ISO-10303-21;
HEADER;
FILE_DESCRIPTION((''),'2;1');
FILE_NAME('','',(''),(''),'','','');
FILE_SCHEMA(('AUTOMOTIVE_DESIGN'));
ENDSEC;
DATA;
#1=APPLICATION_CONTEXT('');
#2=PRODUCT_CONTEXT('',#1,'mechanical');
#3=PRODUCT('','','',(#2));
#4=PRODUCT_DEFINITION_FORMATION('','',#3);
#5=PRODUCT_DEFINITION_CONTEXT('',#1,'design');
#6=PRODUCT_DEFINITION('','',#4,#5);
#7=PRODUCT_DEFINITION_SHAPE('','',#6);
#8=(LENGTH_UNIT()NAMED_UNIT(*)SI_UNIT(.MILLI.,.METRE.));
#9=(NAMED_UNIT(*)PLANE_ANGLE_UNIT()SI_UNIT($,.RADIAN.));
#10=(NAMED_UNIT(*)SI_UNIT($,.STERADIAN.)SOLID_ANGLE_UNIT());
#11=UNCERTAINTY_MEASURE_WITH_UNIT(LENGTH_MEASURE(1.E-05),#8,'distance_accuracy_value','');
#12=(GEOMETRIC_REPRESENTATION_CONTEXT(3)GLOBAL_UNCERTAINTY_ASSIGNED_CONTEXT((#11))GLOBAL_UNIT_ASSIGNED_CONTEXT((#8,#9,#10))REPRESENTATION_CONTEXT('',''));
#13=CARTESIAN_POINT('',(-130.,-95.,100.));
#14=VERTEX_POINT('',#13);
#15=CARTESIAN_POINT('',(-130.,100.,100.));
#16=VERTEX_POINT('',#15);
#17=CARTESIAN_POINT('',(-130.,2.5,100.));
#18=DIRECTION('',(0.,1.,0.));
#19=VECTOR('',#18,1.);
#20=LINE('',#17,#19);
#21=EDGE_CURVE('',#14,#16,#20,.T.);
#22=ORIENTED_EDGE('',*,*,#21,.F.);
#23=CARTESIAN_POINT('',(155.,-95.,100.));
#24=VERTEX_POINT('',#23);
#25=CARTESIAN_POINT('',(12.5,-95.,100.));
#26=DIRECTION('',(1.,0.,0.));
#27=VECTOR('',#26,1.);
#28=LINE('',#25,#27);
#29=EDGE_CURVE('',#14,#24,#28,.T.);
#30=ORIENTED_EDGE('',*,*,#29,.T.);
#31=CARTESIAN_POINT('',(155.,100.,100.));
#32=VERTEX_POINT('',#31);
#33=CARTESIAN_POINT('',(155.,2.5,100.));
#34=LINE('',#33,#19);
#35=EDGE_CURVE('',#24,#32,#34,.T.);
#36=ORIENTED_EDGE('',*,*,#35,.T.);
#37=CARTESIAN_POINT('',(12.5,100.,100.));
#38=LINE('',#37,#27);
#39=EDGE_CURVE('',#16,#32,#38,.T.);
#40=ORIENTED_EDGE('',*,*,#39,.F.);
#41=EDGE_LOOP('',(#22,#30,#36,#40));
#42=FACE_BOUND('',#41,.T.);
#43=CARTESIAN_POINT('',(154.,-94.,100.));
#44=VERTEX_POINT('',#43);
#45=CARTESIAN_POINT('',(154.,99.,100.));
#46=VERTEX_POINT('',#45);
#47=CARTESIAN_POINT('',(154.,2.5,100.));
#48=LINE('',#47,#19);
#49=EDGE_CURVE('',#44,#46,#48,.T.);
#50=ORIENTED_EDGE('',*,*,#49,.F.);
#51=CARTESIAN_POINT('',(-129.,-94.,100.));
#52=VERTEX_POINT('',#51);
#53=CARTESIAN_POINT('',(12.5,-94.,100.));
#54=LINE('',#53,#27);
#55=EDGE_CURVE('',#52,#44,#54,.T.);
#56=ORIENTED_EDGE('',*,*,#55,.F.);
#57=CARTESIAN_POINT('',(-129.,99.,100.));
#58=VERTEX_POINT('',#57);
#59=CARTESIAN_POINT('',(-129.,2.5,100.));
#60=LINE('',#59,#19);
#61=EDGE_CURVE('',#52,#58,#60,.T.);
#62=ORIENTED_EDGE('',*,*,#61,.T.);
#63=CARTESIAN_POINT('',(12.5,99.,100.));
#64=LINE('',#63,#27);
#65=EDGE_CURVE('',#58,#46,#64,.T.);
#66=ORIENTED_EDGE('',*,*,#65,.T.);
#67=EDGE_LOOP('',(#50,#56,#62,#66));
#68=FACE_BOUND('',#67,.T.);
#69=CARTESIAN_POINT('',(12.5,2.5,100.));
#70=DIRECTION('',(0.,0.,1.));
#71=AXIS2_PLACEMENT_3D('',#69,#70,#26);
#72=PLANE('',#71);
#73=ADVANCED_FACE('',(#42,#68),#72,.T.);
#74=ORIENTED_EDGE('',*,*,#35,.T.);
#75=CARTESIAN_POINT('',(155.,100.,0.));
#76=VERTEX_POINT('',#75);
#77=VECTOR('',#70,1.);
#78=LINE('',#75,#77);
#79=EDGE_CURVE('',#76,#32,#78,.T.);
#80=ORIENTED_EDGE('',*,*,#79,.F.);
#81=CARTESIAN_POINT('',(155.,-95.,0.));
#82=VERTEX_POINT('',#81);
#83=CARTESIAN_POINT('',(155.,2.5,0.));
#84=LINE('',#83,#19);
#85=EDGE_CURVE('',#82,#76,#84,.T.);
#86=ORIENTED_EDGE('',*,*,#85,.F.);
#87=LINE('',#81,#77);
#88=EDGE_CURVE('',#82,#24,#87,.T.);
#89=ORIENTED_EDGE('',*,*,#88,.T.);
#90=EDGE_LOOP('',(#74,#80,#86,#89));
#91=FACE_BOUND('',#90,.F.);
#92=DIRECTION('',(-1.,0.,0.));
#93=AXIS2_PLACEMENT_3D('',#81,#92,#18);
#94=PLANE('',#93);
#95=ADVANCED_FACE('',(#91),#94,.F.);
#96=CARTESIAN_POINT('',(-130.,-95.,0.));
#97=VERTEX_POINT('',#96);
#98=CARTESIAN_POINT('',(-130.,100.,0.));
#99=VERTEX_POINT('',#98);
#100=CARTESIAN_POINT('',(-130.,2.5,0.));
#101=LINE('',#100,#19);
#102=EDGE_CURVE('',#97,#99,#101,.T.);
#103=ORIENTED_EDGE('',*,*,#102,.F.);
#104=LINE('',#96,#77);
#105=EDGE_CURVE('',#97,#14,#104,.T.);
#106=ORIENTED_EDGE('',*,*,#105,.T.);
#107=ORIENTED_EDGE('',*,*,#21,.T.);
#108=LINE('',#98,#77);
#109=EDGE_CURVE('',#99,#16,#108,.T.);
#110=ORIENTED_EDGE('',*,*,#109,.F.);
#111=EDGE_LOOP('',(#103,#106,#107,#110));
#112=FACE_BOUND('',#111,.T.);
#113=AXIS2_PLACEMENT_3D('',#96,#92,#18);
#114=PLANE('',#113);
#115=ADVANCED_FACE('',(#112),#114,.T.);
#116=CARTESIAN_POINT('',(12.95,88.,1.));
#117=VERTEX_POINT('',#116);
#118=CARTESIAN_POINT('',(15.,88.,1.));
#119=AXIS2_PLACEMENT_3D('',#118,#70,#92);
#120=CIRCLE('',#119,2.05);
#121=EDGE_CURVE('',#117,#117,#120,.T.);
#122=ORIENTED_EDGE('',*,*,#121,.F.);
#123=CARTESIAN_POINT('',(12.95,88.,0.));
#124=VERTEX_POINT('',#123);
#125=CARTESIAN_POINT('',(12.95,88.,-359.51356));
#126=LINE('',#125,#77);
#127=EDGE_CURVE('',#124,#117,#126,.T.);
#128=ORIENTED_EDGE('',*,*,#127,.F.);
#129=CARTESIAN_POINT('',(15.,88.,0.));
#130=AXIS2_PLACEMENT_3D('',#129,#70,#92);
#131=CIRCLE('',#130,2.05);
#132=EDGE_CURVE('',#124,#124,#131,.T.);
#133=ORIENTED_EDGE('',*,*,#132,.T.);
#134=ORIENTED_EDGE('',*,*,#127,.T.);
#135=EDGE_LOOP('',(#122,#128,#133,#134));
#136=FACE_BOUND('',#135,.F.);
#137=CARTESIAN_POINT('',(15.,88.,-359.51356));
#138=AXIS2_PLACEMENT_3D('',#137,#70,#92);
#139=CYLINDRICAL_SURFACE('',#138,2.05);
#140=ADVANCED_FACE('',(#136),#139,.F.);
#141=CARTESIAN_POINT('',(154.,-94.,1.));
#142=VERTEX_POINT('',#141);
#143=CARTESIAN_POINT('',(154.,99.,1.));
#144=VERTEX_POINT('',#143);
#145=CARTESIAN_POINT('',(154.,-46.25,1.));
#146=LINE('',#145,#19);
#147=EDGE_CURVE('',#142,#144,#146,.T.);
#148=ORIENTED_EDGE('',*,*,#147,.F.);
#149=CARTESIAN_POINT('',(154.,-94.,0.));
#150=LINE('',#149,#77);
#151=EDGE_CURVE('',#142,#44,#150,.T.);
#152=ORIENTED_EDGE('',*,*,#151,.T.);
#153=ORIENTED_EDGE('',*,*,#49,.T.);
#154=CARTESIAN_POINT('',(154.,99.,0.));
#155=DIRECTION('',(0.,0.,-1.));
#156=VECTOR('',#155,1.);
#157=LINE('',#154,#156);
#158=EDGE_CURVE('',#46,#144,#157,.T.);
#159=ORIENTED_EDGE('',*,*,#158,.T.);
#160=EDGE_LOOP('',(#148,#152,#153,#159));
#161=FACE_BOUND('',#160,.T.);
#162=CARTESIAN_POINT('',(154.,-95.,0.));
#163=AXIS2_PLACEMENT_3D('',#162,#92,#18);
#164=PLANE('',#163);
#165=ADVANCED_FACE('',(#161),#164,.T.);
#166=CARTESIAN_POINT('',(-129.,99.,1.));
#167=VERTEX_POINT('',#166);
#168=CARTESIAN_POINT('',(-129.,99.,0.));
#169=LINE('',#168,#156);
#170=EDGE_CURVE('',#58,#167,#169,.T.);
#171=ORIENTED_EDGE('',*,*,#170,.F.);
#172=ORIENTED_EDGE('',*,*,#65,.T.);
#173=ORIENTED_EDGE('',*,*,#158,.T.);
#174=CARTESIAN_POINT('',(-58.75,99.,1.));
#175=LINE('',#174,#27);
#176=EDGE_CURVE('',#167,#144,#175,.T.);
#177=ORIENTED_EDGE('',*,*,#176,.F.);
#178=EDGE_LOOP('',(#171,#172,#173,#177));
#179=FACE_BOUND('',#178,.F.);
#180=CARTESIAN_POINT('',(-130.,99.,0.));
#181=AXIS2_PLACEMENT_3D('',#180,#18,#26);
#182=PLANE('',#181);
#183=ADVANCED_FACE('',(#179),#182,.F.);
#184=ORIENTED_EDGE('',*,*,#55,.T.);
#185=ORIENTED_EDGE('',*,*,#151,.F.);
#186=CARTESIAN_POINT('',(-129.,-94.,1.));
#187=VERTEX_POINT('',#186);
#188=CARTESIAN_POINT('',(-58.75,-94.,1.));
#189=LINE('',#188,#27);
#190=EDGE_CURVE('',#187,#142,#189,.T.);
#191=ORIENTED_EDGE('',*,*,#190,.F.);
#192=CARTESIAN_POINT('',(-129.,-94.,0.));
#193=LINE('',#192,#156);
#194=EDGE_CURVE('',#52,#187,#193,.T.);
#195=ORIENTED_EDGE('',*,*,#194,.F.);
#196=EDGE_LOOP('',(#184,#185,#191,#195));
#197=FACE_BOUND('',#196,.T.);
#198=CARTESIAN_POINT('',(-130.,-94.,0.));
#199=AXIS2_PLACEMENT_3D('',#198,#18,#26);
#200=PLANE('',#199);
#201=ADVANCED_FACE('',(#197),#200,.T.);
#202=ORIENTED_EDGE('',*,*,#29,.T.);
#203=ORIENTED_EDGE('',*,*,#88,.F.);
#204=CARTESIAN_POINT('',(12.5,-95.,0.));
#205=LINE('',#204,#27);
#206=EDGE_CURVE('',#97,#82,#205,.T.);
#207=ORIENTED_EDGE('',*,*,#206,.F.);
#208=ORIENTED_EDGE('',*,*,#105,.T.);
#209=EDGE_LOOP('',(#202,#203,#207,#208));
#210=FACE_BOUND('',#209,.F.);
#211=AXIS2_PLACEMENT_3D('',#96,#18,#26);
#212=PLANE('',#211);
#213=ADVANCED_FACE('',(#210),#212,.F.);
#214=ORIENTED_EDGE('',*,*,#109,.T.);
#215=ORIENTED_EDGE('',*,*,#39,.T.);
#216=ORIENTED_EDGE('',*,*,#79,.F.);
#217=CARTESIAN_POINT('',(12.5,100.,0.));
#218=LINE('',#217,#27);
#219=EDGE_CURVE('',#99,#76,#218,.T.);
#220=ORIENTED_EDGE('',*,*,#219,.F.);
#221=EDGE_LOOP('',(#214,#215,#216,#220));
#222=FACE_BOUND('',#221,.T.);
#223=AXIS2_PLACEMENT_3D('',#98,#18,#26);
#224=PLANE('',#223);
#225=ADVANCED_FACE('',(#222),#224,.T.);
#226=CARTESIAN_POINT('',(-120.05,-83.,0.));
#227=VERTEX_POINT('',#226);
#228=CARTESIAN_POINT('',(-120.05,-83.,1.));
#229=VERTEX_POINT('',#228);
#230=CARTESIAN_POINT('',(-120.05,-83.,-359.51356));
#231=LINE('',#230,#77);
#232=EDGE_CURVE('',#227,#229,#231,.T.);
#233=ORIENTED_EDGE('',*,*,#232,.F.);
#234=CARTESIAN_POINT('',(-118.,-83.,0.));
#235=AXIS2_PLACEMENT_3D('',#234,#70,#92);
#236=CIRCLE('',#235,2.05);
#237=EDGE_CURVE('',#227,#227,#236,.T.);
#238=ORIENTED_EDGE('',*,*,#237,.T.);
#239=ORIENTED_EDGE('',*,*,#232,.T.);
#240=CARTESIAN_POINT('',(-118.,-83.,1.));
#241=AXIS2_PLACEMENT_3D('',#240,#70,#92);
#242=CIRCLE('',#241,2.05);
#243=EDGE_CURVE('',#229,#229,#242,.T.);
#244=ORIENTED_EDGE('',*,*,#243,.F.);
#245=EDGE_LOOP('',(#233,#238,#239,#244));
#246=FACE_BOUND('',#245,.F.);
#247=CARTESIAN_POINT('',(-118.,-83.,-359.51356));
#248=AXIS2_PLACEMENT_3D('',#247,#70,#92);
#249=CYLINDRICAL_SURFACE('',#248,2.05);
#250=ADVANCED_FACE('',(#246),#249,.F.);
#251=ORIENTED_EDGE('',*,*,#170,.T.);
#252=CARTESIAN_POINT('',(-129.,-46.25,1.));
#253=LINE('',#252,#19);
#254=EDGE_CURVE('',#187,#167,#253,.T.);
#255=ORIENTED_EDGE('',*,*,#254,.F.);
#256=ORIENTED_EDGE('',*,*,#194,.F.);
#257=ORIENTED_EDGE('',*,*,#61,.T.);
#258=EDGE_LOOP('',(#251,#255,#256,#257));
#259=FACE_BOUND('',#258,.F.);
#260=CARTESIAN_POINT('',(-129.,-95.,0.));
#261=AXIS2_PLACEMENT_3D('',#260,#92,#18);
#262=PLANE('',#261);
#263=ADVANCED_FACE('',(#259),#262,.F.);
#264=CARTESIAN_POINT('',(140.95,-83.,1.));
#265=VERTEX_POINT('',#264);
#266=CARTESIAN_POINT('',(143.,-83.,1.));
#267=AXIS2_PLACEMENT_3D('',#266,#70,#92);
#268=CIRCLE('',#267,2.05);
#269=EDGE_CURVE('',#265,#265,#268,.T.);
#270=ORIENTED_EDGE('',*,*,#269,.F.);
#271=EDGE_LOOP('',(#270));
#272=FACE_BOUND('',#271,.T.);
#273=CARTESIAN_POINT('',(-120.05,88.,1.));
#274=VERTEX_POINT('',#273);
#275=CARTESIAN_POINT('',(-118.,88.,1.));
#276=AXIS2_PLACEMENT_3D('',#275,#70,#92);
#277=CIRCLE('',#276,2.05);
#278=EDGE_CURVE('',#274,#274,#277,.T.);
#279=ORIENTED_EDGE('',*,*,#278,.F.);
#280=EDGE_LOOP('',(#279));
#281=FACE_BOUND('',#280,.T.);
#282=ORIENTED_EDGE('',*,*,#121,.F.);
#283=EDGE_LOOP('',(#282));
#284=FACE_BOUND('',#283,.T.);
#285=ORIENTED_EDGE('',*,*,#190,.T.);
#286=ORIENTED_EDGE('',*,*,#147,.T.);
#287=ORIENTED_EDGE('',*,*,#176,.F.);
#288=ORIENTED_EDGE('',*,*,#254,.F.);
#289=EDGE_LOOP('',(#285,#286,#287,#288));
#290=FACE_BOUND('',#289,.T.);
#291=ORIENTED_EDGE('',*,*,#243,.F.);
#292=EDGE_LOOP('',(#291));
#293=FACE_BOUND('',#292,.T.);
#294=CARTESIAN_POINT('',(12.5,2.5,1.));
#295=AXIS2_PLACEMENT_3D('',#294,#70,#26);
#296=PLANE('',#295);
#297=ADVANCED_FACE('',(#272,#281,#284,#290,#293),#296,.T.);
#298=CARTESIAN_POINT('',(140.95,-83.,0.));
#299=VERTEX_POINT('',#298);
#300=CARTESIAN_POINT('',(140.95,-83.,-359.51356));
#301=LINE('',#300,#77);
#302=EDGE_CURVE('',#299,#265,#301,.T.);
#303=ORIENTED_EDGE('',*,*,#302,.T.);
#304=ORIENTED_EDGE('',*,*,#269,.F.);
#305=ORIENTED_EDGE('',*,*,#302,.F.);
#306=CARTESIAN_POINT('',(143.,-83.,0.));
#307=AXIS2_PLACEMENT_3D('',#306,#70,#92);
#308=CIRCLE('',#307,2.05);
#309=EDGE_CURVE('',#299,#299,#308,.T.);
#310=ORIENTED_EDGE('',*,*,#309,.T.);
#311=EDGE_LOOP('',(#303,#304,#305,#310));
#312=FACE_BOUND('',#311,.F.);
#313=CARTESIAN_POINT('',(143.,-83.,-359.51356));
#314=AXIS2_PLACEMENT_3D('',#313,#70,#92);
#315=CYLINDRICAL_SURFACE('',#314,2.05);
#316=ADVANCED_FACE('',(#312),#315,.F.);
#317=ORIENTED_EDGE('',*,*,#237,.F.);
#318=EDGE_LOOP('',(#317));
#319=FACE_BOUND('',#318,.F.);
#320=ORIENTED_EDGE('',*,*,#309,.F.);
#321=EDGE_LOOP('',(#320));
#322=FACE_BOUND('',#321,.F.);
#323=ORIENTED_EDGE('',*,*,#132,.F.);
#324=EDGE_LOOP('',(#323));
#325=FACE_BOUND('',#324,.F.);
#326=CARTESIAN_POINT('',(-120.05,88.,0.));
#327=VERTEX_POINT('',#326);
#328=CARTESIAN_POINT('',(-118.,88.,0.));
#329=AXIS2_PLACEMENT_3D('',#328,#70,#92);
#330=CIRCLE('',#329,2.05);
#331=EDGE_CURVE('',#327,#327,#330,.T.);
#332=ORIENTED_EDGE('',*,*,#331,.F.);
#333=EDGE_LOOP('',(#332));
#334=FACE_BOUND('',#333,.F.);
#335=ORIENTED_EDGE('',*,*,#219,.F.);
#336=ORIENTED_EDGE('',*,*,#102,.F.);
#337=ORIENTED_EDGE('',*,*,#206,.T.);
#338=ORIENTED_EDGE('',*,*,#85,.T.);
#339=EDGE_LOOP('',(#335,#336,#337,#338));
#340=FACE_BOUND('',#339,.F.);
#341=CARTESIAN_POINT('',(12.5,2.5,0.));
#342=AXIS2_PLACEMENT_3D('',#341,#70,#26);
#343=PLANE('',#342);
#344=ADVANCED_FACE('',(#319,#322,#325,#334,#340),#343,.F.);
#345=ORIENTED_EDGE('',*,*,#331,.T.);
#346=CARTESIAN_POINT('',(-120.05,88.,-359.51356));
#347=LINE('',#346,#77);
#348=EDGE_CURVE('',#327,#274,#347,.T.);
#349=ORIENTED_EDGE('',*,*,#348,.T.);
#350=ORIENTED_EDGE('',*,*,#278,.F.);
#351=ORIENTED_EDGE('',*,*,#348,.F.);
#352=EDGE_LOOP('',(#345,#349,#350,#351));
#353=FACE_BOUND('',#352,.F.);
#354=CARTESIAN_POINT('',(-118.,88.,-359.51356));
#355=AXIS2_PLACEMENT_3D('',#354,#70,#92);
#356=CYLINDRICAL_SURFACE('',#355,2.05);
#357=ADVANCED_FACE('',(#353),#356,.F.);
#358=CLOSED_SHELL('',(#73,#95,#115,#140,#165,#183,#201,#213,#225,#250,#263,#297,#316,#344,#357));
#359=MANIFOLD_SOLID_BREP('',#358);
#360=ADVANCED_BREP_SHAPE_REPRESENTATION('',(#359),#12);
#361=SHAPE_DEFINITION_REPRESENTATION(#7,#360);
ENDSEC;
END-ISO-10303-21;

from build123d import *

# Parameters (mm, degrees)
F0_W     = 285
F0_H     = 195
F1_DEPTH = 100
F2_T     = -1
F3_D     = 4.1


# Not quite as in the source:
# - a feature names something its author has since deleted; it is built from what else it names


with BuildPart() as f1:
    # F0 (on Top) → F1 (new body)
    with BuildSketch(Plane.XY):
        with Locations((12.5, 2.5)):
            Rectangle(F0_W, F0_H)
    extrude(amount=F1_DEPTH)

    # F2
    f2_openings = [f1.faces().sort_by_distance(p)[0] for p in [
        (12.5, 2.5, 100),
    ]]
    offset(amount=F2_T, openings=f2_openings)

    # F3 (through all)
    with Locations(Plane(origin=(0, 0, 0), x_dir=(1, 0, 0), z_dir=(0, 0, -1))):
        with Locations((15, -88), (-118, -88), (143, 83), (-118, 83)):
            Hole(F3_D / 2)


solid = f1.part
